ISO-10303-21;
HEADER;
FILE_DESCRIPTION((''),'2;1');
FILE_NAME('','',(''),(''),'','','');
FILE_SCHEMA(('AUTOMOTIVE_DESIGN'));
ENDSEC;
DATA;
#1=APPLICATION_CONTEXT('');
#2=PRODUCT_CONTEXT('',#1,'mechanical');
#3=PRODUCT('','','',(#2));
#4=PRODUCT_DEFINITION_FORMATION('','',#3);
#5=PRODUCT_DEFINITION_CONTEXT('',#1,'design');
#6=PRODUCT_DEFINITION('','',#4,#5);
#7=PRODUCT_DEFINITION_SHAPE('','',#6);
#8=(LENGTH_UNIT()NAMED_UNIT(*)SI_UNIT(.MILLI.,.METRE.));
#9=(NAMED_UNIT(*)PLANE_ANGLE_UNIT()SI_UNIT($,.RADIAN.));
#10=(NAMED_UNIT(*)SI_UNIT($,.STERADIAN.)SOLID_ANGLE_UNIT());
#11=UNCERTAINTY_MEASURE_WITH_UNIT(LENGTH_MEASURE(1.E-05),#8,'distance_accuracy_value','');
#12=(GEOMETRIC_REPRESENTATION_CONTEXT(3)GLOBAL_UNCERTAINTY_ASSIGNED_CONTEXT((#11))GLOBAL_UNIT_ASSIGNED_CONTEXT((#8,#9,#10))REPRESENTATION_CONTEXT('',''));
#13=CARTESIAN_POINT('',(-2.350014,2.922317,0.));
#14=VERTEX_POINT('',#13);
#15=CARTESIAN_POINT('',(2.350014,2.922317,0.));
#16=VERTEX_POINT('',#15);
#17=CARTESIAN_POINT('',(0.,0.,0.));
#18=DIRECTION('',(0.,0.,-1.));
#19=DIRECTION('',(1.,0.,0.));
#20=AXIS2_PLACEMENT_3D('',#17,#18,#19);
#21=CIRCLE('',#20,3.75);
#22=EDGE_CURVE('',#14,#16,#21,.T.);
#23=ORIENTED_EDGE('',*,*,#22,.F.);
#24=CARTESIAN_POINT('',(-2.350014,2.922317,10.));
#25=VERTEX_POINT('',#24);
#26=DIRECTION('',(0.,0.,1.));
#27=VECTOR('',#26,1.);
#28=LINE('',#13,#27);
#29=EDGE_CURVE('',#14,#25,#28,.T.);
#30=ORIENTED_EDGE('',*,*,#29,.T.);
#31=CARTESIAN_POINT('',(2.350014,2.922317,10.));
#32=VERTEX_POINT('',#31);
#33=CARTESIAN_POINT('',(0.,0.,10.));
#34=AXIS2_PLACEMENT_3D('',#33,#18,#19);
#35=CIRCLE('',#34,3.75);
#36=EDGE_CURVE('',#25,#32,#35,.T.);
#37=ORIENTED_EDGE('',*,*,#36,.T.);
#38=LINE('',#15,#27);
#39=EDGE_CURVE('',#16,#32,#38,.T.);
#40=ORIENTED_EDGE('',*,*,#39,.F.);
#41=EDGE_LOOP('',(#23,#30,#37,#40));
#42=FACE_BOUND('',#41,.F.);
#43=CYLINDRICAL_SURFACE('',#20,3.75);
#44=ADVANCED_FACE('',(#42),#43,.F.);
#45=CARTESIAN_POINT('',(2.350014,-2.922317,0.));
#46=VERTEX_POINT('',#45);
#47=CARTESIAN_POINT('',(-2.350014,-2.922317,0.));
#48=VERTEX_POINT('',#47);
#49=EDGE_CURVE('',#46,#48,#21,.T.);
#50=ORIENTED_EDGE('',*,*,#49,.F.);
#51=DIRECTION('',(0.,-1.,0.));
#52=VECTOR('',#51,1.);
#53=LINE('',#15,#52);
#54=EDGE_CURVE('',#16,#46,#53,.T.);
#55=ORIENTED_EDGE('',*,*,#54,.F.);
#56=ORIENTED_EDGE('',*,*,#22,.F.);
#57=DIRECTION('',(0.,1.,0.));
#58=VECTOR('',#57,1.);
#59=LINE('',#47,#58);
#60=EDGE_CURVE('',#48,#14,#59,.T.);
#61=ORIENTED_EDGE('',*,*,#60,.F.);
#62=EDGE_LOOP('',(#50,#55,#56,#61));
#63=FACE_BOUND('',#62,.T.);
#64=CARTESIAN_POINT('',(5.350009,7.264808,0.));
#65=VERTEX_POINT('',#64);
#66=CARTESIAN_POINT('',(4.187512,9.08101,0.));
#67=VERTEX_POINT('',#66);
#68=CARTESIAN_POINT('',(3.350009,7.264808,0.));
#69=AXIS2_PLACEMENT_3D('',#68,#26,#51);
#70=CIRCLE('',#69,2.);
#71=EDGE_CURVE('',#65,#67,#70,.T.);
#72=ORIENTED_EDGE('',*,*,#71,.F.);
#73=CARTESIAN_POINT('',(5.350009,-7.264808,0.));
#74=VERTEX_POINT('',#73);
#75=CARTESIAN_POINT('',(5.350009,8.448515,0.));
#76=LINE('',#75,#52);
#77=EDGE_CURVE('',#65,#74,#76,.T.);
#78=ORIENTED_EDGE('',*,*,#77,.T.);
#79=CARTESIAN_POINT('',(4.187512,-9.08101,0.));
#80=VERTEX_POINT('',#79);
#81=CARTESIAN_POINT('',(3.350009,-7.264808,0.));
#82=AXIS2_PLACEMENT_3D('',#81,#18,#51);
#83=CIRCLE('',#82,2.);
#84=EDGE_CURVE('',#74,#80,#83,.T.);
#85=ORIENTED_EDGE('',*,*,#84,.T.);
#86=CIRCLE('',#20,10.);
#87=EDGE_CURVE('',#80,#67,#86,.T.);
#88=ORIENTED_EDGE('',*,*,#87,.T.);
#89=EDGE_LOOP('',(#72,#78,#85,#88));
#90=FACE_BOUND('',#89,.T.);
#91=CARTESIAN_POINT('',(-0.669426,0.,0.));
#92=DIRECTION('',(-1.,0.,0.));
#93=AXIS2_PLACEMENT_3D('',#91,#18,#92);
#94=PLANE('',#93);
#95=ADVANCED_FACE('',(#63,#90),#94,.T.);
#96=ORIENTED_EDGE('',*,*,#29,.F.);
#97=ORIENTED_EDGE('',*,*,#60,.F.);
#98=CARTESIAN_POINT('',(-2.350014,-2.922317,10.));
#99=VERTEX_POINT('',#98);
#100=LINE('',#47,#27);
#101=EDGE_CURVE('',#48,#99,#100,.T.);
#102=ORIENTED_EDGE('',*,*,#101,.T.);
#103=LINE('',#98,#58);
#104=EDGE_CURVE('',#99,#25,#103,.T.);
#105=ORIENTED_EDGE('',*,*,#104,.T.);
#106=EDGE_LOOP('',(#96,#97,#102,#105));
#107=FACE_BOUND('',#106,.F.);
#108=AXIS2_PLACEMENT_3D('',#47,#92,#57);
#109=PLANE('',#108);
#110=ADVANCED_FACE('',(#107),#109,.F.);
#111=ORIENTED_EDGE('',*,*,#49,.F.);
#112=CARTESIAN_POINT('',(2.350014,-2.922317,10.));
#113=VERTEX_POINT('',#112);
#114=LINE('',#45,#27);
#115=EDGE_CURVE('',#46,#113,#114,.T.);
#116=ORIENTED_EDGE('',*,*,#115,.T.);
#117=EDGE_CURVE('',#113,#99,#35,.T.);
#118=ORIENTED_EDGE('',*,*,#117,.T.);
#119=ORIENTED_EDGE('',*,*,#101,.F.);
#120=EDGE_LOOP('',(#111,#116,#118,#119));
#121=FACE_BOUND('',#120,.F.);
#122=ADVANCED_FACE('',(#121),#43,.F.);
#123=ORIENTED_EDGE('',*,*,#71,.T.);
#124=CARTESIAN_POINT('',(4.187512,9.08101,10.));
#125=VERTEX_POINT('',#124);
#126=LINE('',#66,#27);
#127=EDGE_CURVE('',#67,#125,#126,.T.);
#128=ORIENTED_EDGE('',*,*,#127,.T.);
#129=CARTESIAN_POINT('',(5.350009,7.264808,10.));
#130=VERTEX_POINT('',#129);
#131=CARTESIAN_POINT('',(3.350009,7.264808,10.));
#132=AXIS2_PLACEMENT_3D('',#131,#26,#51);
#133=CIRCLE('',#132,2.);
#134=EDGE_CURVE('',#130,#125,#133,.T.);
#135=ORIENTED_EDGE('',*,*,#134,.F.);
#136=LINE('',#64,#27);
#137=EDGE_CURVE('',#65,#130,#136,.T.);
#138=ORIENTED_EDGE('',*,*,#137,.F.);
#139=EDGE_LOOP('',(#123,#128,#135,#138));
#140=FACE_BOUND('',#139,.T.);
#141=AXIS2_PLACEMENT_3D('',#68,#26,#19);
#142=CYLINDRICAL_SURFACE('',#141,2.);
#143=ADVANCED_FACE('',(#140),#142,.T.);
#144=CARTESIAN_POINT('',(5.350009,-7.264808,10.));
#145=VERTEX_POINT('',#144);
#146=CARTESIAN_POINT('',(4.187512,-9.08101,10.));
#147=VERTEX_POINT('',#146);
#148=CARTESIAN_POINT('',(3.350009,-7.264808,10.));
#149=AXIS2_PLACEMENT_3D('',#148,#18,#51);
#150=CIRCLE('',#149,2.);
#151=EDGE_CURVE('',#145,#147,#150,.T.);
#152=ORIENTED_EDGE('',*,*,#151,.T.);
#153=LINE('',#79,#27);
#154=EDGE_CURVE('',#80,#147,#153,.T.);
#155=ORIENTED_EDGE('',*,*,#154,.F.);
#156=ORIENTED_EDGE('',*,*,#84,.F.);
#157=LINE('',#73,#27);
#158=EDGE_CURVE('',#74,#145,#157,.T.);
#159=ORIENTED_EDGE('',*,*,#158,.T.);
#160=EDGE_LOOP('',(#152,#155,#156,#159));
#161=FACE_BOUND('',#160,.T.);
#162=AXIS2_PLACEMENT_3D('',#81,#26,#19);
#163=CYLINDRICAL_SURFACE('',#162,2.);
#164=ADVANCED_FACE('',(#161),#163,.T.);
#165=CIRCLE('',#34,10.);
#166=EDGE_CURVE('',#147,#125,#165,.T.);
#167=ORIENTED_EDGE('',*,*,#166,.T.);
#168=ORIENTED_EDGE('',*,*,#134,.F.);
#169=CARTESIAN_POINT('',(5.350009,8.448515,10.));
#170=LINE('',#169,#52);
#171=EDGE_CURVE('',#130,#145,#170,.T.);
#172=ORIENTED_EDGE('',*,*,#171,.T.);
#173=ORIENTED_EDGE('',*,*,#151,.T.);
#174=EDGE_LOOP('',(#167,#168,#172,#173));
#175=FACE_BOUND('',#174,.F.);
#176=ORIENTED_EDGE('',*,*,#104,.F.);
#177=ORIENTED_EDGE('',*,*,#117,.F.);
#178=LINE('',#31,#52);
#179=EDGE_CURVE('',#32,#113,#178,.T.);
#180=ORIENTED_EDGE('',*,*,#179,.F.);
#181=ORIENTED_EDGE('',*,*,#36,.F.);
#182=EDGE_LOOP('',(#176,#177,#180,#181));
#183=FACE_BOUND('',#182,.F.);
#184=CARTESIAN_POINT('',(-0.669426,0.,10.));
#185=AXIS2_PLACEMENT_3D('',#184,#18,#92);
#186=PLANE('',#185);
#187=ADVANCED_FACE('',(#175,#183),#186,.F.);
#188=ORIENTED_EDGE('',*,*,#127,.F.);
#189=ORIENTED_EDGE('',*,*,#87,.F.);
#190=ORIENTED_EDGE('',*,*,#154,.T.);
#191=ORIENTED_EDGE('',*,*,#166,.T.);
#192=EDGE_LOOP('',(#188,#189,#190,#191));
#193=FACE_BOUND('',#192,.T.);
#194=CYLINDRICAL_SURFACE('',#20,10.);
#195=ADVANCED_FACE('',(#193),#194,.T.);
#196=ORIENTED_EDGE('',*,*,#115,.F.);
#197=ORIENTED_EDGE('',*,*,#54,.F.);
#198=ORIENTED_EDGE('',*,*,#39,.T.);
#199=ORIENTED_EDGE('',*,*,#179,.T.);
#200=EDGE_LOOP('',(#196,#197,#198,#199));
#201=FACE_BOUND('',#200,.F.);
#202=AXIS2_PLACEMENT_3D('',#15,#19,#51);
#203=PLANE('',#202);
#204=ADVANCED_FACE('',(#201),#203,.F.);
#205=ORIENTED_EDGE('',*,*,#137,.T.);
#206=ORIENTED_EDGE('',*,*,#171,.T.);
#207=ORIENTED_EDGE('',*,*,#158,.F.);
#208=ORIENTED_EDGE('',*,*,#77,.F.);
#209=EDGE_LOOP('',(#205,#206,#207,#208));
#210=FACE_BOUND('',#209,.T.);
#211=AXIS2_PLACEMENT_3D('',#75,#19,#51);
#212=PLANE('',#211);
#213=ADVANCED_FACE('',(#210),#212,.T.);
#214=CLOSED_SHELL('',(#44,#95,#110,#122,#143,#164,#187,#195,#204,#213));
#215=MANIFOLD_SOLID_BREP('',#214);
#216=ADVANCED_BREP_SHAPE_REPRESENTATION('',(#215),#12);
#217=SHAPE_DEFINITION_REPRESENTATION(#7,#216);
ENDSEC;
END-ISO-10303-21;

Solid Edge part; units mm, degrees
sketch "Sketch1" plane through (0, 0, 0) normal (0, 0, 1) x (1, 0, 0)
  line L0 (5.35, 8.4485) -> (5.35, -8.4485)
  arc A0 (5.35, -8.4485) -> (5.35, 8.4485) centre (0, 0) cw
  line L1 (-2.35, -2.9223) -> (-2.35, 2.9223)
  arc A1 (2.35, -2.9223) -> (-2.35, -2.9223) centre (0, 0) cw
  line L2 (2.35, 2.9223) -> (2.35, -2.9223)
  arc A2 (-2.35, 2.9223) -> (2.35, 2.9223) centre (0, 0) cw
extrude "Protrusion1" add sketch "Sketch1" along normal blind 10
fillet "Round_1" radius 2 1 edges at (5.35, 8.4485, 5)
fillet "Round_2" radius 2 1 edges at (5.35, -8.4485, 5)
